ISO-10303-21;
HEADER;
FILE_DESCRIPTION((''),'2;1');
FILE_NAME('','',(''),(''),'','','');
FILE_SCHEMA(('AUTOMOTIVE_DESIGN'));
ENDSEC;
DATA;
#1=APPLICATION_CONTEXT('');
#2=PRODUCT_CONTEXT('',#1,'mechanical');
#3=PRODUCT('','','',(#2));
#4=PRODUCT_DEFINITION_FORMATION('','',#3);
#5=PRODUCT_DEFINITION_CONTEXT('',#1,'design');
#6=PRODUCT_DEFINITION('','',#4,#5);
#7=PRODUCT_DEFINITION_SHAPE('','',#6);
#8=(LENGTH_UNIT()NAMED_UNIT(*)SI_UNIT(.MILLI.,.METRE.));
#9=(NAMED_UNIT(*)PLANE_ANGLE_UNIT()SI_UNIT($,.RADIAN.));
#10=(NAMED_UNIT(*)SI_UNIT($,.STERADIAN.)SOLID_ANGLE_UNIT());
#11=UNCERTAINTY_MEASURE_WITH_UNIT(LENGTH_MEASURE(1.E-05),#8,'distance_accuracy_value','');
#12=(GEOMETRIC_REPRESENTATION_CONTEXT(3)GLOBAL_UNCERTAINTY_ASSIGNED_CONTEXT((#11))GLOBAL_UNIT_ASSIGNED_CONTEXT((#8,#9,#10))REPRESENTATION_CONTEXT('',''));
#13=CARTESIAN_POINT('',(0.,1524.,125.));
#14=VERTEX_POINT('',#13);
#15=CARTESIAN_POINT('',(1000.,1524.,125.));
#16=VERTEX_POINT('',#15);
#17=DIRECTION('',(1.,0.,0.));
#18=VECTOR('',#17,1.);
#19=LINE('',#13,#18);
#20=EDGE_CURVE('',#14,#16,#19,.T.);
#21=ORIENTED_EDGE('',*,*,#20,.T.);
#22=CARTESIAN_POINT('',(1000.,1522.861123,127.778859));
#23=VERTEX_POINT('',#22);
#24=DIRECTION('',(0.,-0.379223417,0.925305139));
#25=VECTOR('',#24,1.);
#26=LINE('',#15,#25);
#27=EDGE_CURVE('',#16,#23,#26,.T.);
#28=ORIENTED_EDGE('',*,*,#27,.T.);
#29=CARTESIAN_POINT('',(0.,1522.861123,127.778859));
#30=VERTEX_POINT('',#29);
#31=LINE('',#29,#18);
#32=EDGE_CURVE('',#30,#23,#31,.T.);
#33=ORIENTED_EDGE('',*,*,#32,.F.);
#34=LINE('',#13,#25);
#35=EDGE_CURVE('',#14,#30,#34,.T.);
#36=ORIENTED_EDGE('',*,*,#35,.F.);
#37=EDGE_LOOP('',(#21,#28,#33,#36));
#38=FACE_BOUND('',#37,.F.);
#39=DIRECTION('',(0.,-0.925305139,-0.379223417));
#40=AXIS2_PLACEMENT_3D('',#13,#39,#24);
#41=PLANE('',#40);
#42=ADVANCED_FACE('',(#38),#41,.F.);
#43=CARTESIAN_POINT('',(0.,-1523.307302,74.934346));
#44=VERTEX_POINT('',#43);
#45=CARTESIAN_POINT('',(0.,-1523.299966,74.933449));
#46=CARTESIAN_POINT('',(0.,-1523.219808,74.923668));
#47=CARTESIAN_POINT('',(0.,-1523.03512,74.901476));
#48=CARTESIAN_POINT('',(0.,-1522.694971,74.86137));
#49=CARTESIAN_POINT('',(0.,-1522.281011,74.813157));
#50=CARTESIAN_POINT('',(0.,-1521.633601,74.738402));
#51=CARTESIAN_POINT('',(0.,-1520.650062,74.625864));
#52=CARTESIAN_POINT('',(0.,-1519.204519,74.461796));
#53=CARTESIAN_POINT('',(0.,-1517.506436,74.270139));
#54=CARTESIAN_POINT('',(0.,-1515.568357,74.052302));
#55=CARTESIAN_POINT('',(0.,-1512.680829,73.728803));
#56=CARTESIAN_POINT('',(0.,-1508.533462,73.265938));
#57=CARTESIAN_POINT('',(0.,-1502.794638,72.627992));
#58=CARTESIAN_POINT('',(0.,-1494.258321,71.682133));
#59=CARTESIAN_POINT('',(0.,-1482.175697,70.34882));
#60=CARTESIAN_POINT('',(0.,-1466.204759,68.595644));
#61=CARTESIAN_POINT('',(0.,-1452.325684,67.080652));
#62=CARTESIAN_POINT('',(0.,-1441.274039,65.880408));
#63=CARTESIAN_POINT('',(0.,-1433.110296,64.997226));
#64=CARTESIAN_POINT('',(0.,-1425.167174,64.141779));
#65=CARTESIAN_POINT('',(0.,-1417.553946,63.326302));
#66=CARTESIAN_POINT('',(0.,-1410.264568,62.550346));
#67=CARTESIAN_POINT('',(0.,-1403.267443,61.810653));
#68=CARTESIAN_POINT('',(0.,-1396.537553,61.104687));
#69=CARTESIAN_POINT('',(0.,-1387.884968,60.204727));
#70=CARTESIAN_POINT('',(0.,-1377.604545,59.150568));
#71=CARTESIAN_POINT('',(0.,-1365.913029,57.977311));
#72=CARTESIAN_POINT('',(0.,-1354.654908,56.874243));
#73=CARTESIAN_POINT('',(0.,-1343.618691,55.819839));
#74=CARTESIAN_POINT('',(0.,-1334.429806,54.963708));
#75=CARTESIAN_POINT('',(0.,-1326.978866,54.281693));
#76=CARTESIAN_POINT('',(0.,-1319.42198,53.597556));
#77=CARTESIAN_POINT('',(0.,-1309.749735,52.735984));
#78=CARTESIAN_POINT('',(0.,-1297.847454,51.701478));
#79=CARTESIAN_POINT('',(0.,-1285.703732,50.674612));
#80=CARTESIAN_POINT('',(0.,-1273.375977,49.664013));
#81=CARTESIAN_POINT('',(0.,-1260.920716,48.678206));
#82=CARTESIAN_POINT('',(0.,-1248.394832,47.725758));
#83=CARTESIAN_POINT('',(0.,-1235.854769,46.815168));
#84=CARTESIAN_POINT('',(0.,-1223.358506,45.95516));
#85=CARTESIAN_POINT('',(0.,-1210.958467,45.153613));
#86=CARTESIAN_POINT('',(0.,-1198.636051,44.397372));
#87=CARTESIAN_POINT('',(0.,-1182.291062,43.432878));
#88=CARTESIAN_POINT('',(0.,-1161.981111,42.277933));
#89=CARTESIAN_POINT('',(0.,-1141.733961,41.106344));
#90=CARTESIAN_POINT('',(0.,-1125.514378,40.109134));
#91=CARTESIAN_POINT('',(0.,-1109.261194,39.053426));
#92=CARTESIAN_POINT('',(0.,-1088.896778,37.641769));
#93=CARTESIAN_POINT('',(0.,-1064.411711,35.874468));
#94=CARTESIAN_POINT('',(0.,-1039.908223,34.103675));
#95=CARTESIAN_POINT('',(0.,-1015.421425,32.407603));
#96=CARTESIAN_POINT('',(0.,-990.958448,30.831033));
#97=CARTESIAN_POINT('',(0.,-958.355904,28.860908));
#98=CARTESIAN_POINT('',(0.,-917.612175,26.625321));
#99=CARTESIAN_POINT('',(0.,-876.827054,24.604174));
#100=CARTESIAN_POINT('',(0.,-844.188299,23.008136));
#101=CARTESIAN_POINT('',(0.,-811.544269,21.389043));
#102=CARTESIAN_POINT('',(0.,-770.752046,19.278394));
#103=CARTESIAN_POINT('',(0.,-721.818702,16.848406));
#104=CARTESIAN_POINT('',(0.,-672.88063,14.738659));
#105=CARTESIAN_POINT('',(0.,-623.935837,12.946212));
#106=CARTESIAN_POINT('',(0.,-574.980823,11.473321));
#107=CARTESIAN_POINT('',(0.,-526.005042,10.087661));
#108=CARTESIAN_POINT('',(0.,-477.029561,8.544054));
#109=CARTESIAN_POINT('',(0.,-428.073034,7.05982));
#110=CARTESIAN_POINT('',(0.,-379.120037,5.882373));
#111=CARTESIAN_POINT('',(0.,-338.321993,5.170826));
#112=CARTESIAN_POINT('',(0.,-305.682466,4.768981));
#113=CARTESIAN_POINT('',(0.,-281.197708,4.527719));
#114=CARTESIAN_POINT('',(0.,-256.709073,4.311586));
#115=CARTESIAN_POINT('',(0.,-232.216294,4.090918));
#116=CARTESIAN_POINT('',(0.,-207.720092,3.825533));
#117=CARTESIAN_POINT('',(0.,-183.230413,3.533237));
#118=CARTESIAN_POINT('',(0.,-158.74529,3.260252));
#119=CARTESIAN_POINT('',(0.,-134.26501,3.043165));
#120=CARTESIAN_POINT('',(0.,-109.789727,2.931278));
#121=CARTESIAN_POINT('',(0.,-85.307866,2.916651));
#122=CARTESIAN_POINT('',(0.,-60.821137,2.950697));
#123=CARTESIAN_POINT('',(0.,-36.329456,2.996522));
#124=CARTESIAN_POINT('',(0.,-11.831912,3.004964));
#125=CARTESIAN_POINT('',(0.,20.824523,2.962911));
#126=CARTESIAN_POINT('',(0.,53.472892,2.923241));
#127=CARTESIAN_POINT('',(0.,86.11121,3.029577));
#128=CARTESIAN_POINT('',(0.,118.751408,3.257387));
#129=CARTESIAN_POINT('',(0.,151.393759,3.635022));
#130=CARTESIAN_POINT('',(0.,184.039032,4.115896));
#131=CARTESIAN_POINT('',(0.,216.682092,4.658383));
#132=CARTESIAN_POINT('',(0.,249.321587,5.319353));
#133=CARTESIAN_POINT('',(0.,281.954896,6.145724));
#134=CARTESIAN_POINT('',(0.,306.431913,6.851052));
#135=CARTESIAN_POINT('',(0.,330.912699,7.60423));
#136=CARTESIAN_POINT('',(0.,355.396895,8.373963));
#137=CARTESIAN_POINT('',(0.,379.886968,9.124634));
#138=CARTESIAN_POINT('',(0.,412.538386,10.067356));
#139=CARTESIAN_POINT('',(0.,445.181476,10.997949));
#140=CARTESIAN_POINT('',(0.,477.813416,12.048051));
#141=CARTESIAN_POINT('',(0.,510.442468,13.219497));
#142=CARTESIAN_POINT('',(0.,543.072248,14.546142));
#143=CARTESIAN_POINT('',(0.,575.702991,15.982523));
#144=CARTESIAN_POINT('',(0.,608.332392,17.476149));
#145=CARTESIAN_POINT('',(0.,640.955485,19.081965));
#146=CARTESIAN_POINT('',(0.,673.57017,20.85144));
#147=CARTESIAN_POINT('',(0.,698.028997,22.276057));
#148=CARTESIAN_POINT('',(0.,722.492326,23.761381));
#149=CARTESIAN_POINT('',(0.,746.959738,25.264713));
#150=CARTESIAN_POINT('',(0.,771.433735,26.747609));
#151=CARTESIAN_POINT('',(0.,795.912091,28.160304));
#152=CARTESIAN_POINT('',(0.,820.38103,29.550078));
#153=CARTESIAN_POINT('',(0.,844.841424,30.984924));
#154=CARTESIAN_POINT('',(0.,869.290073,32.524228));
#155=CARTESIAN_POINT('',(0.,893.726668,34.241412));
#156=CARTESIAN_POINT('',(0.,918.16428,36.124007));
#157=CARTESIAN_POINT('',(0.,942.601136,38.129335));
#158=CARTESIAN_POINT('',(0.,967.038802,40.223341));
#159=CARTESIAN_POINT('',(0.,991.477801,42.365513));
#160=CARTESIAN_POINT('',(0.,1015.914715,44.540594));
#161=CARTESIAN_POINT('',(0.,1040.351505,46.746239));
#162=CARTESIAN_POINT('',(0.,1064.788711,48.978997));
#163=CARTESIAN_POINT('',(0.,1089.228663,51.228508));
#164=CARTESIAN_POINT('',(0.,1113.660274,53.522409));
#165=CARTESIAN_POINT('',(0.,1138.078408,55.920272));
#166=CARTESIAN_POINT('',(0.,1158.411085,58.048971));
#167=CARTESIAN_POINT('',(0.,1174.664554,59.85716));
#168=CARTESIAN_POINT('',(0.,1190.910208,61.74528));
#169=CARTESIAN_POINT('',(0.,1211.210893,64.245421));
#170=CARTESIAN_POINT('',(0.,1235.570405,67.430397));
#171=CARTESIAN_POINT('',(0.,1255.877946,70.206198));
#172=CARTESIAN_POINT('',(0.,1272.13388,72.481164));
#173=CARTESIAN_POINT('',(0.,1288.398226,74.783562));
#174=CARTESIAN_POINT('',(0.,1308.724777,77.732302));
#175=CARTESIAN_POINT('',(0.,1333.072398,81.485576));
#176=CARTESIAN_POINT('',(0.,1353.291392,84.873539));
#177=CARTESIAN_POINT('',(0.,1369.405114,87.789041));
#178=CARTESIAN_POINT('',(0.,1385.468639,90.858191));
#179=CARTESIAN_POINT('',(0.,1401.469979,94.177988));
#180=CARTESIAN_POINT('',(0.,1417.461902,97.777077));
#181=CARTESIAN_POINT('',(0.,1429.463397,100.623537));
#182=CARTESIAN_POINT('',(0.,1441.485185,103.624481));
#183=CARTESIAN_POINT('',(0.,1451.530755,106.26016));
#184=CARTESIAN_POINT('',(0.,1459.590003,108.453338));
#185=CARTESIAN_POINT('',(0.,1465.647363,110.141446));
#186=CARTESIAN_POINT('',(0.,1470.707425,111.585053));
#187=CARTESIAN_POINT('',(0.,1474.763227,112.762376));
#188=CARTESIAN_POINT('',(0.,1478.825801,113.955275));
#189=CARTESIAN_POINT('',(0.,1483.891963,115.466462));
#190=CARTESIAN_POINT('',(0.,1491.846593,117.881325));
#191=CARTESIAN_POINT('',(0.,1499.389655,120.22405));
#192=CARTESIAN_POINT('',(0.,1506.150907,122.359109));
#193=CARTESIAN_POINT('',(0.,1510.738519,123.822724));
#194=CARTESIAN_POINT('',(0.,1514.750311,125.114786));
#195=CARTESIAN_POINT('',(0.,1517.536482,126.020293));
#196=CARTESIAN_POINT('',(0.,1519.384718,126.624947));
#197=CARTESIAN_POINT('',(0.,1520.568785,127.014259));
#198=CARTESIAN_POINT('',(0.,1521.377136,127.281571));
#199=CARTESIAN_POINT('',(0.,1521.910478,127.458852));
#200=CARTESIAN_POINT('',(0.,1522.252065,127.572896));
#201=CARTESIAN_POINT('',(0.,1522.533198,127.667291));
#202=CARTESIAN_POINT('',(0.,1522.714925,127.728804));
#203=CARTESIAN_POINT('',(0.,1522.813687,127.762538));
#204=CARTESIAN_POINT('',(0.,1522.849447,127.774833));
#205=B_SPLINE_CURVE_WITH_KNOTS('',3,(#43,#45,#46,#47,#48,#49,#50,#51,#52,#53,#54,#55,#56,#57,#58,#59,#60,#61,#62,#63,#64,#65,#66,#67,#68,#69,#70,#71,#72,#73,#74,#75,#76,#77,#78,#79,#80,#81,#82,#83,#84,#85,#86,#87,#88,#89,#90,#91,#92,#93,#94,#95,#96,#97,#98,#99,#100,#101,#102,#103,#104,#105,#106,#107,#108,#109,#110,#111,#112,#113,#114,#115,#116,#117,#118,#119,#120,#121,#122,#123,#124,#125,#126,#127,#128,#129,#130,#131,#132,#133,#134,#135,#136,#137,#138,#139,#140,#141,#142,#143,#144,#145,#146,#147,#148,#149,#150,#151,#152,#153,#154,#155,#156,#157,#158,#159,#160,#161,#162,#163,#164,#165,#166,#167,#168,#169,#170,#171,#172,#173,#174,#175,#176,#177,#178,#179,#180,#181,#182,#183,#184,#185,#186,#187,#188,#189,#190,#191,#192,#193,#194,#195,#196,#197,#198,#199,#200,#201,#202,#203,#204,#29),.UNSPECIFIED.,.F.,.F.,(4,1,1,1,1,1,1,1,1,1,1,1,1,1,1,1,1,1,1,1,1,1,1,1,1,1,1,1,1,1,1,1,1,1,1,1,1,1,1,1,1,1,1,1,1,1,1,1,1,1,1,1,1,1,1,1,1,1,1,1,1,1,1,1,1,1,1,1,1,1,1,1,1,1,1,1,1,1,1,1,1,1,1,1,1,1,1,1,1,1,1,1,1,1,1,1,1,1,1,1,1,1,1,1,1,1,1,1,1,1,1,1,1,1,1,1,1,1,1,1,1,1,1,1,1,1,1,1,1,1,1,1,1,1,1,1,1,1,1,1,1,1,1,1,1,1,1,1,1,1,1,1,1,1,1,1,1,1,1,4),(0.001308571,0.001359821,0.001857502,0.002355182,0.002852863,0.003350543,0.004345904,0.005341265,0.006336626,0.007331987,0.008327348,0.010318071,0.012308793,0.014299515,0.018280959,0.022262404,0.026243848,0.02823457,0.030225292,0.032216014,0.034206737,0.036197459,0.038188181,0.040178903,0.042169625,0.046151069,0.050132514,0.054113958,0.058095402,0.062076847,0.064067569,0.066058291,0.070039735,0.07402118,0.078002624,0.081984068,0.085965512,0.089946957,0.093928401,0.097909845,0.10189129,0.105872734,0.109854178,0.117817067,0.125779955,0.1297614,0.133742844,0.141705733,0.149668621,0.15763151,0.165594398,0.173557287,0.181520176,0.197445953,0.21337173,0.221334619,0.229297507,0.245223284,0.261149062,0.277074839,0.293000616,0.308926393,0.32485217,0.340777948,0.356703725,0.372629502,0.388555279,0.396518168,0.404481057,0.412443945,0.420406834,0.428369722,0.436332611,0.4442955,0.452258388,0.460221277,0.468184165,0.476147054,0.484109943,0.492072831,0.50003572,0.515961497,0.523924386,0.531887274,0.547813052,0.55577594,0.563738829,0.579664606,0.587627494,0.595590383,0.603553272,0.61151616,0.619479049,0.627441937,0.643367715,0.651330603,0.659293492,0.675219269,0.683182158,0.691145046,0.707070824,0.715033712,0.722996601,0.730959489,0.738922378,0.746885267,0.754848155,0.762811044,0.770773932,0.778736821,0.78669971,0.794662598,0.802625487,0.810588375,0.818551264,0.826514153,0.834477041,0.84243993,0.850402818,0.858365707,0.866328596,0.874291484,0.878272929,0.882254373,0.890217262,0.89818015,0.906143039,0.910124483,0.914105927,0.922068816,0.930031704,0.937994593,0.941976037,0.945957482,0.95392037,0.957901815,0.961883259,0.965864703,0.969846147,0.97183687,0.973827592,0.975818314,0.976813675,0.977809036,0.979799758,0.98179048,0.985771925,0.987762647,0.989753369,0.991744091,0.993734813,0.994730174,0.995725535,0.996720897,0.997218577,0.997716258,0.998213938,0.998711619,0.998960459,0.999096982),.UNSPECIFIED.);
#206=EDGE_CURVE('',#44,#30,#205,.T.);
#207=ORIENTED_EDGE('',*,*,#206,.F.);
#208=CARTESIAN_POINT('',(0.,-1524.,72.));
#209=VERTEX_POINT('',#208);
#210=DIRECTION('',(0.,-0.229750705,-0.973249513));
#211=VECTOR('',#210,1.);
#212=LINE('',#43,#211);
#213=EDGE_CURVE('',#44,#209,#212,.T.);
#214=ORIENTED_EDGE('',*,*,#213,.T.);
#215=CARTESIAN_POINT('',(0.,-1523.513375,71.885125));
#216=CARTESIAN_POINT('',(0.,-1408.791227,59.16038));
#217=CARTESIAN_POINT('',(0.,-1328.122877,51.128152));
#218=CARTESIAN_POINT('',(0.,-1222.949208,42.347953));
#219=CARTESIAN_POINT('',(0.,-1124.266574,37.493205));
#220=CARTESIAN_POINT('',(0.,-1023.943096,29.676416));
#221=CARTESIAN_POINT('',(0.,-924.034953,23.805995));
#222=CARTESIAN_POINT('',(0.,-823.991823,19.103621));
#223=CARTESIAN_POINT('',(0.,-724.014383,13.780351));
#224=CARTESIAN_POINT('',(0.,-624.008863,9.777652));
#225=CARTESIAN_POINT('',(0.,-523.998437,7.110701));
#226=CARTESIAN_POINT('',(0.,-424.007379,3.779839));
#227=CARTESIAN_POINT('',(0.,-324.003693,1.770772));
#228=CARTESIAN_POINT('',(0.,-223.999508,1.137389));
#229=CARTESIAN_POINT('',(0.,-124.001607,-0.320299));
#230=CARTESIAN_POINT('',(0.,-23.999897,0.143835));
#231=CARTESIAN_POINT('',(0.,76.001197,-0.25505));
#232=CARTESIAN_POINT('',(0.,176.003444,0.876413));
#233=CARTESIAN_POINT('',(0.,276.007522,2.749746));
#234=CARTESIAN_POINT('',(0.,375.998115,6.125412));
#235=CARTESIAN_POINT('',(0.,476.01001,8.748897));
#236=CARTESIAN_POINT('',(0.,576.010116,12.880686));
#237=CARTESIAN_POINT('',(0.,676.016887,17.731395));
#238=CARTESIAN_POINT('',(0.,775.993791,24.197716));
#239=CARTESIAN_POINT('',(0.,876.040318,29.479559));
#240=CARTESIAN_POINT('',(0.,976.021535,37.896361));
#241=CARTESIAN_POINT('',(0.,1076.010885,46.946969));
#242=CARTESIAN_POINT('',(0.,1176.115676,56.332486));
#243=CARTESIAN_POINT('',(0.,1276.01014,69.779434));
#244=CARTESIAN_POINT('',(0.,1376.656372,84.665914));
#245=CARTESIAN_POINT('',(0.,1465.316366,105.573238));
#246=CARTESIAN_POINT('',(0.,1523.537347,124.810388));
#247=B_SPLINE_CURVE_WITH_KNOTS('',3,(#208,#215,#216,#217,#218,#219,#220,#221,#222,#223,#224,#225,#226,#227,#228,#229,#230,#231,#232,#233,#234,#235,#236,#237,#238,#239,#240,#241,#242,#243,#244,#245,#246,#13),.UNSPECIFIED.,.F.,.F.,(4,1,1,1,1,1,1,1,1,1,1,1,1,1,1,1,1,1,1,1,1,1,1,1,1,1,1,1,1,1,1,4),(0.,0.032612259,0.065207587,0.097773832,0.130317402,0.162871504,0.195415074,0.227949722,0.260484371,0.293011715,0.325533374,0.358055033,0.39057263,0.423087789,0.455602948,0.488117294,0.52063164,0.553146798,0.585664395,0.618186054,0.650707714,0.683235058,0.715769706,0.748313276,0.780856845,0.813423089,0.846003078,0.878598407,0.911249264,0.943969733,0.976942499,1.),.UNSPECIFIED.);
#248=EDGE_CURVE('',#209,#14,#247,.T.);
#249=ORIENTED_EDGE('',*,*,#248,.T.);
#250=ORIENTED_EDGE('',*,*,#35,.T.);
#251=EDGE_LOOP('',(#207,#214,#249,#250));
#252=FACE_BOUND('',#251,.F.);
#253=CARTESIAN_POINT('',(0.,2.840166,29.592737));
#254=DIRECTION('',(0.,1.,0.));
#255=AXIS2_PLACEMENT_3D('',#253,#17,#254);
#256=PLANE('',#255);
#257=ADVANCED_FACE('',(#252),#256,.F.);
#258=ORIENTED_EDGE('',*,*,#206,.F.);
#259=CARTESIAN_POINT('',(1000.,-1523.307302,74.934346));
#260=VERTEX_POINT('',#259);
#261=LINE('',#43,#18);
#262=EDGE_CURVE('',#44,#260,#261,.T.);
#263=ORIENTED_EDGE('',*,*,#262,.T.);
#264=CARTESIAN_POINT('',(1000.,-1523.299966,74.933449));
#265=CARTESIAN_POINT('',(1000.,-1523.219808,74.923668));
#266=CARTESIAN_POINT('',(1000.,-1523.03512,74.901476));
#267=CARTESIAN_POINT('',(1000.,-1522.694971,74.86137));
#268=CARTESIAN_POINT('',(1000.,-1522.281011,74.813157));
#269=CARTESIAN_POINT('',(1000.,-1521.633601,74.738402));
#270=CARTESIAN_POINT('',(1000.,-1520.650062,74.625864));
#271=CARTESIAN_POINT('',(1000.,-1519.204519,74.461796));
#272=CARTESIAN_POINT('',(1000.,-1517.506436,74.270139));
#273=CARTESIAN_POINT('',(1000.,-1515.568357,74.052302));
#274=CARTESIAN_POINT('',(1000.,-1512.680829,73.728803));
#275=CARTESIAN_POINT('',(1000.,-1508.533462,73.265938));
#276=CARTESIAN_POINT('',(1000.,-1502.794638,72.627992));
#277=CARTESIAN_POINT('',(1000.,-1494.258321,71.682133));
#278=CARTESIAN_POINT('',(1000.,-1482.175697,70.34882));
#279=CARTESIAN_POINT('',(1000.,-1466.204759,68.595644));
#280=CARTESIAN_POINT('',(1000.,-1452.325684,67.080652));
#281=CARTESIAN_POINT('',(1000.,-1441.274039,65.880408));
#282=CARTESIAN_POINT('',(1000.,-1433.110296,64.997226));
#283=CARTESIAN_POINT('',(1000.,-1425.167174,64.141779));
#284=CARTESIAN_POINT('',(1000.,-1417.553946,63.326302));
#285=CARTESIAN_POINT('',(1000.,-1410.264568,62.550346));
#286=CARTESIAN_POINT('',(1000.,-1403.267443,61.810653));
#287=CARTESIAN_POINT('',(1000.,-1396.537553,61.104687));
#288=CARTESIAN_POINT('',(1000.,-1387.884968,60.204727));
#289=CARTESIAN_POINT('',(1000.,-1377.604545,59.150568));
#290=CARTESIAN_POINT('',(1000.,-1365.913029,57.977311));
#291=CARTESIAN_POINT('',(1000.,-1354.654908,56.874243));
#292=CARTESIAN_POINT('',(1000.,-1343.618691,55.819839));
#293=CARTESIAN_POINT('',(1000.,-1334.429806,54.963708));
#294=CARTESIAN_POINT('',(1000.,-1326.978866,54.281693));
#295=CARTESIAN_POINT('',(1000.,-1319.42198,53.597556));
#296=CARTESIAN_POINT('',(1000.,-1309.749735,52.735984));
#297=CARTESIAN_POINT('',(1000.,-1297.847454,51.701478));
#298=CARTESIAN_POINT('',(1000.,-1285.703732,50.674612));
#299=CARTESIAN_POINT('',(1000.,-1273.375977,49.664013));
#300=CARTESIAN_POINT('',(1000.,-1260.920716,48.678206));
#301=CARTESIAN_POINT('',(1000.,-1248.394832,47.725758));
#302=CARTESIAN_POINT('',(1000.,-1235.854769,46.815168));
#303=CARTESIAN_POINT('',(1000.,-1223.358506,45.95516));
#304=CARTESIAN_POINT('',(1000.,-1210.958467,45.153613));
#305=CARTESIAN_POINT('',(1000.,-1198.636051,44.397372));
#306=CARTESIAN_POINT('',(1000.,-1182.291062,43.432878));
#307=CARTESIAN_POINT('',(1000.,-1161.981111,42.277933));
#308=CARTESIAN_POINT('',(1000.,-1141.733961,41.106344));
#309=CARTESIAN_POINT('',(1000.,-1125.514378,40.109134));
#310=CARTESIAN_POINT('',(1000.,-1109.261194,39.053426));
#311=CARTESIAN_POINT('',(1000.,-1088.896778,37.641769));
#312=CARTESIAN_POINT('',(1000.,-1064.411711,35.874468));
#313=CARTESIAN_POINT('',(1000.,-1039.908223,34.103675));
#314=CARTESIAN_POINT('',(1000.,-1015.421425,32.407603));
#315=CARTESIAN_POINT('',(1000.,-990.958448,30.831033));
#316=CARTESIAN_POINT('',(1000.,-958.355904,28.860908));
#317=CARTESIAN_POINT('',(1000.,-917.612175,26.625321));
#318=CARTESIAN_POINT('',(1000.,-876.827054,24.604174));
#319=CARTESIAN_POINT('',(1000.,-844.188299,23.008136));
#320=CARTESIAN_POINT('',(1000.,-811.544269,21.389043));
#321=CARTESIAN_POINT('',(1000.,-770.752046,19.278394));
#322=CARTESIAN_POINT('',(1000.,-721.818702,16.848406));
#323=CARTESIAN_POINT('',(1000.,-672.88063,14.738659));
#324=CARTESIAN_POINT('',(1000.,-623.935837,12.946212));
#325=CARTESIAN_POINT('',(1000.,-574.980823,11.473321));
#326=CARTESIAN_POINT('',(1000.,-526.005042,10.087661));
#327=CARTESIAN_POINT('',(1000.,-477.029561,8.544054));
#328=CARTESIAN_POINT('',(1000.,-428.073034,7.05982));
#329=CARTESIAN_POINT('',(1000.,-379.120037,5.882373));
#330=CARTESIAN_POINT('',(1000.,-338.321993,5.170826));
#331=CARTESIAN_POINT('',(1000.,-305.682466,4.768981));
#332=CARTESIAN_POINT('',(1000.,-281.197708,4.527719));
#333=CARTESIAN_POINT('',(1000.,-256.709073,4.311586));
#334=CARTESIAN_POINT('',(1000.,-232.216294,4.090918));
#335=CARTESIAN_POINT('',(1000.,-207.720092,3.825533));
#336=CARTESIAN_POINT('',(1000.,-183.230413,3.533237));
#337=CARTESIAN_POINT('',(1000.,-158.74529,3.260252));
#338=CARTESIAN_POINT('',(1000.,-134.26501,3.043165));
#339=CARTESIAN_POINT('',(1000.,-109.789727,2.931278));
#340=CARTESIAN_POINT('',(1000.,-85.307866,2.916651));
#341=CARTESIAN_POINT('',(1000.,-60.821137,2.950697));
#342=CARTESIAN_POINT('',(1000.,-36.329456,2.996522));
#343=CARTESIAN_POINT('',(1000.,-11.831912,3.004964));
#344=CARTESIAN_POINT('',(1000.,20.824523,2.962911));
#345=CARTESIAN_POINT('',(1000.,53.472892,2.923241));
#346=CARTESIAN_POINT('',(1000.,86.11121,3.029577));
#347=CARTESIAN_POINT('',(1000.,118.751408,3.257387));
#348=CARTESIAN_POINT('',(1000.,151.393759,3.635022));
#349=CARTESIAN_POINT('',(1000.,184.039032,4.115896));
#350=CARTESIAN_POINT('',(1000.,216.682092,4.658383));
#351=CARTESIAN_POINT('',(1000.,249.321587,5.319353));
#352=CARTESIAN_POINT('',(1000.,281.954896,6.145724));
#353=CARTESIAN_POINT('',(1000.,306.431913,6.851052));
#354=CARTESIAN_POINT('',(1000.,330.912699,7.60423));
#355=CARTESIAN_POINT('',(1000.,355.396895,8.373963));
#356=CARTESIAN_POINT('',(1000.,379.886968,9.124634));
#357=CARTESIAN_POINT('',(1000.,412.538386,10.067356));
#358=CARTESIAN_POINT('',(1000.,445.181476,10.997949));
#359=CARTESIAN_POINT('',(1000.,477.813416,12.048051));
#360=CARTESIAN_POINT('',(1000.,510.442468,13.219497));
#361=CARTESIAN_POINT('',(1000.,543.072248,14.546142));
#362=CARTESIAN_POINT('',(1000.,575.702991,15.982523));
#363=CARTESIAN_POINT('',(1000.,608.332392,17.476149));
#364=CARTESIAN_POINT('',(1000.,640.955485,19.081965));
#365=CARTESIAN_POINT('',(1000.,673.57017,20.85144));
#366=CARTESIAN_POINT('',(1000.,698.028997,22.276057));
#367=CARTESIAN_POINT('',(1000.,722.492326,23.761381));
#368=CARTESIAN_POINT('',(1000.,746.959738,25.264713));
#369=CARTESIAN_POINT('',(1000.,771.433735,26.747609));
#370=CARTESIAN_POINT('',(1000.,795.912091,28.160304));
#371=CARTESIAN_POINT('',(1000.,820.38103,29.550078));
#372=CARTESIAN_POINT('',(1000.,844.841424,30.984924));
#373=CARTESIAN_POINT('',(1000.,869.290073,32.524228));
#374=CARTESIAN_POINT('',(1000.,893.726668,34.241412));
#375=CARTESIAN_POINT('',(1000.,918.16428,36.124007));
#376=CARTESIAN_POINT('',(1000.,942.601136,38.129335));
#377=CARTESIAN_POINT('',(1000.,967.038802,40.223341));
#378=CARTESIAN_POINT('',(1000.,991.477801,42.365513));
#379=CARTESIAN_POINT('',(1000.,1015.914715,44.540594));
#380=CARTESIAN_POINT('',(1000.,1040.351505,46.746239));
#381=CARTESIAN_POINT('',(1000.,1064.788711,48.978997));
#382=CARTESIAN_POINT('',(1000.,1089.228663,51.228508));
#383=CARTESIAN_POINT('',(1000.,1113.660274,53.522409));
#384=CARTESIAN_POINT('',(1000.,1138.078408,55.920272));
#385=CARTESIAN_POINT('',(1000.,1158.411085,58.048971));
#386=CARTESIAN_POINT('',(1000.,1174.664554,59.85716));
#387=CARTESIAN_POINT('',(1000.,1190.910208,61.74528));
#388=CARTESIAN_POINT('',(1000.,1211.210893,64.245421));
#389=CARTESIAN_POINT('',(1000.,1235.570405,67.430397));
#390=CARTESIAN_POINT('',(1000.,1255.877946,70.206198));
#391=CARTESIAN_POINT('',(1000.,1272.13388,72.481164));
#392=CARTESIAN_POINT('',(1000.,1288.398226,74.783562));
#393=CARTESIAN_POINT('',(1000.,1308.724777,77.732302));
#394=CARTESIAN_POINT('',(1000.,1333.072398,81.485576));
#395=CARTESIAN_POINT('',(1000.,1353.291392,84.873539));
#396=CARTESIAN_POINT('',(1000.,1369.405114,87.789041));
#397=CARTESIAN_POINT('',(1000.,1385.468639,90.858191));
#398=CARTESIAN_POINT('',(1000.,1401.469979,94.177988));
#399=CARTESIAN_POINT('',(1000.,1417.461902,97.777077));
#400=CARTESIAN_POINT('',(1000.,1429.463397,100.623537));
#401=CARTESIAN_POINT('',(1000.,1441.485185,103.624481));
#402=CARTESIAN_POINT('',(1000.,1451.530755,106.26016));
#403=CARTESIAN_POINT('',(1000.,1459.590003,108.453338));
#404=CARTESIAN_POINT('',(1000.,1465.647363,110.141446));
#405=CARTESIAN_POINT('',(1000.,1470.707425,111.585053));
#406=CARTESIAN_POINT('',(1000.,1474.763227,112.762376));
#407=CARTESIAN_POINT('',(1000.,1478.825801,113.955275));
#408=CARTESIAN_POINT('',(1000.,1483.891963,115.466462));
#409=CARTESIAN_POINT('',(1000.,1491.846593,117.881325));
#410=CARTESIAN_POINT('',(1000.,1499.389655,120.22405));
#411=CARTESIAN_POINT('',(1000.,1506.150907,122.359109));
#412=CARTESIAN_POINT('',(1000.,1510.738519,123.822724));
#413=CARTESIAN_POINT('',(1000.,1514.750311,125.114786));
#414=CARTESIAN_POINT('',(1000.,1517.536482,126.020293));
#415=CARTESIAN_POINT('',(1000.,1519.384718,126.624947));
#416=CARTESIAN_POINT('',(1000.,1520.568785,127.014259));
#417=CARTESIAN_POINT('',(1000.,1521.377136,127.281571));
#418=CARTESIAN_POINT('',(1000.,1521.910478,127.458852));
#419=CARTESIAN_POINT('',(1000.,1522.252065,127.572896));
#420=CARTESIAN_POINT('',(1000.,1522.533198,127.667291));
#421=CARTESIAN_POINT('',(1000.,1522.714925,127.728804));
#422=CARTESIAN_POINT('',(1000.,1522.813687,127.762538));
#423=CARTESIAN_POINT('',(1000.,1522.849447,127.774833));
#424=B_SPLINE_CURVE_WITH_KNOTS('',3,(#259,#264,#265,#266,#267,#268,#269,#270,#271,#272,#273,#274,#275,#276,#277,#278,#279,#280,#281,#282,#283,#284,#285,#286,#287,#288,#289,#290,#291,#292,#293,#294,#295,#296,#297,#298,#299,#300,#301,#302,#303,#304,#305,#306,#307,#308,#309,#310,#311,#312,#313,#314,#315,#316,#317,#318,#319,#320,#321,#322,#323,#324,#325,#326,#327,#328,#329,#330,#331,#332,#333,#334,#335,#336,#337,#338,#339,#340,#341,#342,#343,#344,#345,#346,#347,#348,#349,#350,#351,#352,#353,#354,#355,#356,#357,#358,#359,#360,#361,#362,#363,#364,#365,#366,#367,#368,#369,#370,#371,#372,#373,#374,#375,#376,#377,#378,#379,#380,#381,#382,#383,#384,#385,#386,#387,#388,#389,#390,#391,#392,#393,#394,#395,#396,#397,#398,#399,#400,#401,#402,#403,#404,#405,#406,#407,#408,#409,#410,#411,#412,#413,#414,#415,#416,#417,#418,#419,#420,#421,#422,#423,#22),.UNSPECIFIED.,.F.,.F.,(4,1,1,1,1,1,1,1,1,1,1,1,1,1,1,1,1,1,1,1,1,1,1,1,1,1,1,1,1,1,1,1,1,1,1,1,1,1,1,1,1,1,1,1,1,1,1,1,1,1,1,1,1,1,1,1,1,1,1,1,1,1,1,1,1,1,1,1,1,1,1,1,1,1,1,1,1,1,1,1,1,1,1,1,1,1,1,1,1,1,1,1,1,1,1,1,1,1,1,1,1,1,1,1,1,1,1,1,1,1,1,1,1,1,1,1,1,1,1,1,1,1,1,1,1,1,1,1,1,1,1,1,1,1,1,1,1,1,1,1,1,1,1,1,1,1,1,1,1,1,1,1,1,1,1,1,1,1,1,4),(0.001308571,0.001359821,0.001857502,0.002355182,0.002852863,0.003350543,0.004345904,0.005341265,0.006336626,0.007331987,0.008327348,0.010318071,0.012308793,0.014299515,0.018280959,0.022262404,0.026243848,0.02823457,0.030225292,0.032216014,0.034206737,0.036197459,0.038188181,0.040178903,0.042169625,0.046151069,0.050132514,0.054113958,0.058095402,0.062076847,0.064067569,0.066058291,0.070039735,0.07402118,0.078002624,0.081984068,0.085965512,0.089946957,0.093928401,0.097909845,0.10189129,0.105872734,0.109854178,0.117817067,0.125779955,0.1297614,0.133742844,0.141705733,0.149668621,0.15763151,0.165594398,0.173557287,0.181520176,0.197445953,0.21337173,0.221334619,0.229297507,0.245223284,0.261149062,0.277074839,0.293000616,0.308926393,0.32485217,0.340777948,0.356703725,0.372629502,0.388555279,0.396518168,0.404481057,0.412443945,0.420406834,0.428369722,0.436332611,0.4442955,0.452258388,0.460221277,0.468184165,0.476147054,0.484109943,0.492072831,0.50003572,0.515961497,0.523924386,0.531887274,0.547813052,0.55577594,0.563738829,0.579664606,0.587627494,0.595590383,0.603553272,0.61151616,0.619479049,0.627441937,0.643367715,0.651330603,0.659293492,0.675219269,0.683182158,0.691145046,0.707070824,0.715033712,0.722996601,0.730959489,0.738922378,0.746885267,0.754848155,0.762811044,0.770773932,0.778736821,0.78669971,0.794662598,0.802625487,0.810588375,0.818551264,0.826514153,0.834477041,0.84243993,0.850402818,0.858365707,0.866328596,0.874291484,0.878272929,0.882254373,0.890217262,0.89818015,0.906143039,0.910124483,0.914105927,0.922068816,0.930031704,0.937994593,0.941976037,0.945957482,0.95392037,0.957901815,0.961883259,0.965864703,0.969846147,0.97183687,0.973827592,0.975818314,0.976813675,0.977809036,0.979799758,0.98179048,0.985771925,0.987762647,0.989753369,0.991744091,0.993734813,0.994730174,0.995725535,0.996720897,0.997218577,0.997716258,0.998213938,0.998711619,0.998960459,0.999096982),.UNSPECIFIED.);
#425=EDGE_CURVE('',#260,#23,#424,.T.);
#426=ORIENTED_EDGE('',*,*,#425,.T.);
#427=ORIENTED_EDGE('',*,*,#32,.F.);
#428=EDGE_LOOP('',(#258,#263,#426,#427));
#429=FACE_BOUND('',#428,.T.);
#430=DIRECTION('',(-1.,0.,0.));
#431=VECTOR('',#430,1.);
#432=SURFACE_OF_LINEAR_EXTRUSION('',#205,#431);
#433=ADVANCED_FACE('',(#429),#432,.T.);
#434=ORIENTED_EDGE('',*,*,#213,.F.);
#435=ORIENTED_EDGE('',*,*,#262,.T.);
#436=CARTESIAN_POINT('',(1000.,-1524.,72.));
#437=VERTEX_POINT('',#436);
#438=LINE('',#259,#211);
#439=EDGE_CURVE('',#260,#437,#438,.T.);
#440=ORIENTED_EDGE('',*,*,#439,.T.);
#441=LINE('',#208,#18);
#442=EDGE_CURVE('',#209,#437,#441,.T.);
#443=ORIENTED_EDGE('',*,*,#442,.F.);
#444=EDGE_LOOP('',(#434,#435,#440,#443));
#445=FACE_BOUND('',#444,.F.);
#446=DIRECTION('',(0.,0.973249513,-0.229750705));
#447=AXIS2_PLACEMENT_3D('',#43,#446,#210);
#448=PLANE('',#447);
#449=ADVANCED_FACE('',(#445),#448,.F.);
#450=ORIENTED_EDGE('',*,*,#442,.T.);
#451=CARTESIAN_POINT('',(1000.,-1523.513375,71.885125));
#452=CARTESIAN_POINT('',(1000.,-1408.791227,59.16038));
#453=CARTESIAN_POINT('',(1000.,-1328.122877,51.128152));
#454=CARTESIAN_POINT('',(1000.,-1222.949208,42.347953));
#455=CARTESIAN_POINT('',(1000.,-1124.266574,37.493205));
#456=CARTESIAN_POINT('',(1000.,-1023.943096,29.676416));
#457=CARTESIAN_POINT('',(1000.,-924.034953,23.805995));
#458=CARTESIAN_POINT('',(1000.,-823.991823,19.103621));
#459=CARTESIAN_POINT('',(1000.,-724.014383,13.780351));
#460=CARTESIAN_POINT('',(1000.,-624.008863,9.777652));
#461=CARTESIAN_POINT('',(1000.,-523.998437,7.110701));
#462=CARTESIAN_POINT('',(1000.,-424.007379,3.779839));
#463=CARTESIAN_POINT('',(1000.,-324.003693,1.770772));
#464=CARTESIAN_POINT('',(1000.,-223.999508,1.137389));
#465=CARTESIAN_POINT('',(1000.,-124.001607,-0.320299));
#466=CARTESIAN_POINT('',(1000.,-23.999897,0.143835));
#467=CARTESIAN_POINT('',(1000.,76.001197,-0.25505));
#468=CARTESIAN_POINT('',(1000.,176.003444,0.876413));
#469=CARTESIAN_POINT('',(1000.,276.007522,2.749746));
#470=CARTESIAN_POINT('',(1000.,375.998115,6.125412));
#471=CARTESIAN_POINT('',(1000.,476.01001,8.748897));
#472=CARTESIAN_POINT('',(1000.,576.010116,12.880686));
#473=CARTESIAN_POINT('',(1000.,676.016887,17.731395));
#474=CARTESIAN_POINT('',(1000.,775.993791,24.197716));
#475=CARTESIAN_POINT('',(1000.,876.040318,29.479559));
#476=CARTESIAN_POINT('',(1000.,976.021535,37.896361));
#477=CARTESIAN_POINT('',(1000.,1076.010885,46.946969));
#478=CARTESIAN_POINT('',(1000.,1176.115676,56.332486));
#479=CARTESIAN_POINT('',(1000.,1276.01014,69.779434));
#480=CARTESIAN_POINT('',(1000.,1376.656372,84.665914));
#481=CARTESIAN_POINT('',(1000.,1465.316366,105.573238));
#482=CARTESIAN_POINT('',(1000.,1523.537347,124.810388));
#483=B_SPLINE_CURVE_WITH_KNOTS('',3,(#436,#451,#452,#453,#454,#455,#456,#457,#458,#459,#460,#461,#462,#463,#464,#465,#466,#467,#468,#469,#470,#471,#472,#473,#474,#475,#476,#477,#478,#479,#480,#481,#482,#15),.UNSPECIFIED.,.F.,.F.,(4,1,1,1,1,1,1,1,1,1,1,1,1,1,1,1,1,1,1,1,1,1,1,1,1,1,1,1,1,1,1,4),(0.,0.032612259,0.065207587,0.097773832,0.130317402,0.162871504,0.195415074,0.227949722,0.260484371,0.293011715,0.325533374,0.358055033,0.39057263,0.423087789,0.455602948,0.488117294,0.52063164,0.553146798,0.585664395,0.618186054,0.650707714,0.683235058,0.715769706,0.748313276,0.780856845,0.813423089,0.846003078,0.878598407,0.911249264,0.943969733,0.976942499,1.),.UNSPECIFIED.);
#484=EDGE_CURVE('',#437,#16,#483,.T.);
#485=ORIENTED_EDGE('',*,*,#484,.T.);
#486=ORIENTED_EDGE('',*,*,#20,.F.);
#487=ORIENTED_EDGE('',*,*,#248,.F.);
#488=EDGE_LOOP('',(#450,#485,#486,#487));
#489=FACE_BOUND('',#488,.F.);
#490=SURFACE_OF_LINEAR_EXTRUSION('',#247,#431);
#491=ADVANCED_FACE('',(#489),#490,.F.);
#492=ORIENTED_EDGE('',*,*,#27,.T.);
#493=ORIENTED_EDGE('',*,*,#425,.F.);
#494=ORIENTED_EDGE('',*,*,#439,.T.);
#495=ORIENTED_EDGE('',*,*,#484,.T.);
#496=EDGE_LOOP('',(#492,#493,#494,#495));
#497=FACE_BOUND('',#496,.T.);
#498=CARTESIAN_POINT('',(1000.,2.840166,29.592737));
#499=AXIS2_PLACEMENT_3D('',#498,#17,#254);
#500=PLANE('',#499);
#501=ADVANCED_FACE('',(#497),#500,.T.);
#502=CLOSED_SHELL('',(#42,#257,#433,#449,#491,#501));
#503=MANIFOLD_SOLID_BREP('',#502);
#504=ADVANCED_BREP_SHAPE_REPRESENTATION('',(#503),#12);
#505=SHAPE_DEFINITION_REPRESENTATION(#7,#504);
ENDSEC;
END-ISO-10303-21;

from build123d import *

# Parameters (mm, degrees)
F1_DEPTH = 1000


# Not quite as in the source:
# - the dataset's text gives a spline's control points without its knots; the knots are read off the source's solid


with BuildPart() as f1:
    # F0 (on Right) → F1 (new body)
    with BuildSketch(Plane.YZ):
        with BuildLine():
            Line((-1523.3073018893, 74.9343461632), (-1524, 72))
            add(Edge.make_bspline(
                [(-1524, 72), (-1523.5133752437, 71.8851246477), (-1408.7912269509, 59.1603797095), (-1328.1228770954, 51.1281516651), (-1222.9492078542, 42.3479525491), (-1124.2665744342, 37.4932045799), (-1023.94309645, 29.6764155139), (-924.0349531775, 23.805994689), (-823.9918225167, 19.1036206425), (-724.0143825979, 13.7803509145), (-624.0088625202, 9.7776519647), (-523.9984371896, 7.1107007848), (-424.0073790506, 3.7798389716), (-324.0036932597, 1.7707717723), (-223.9995081657, 1.1373887456), (-124.0016068592, -0.3202987771), (-23.9998974277, 0.1438353394), (76.0011965648, -0.2550497721), (176.0034437181, 0.8764133936), (276.0075220578, 2.7497464803), (375.9981147016, 6.1254124825), (476.0100095315, 8.748896998), (576.0101158316, 12.8806862016), (676.01688664, 17.7313952533), (775.9937905409, 24.1977156997), (876.0403182227, 29.4795593065), (976.0215348454, 37.8963611687), (1076.0108845518, 46.9469689387), (1176.1156760629, 56.3324859418), (1276.010139981, 69.7794335028), (1376.656372399, 84.6659141086), (1465.3163658887, 105.5732382543), (1523.5373474307, 124.8103882913), (1524, 125)],
                knots=[0, 0, 0, 0, 0.0326122587, 0.0652075875, 0.097773832, 0.1303174015, 0.1628715045, 0.195415074, 0.2279497224, 0.2604843708, 0.2930117147, 0.3255333739, 0.3580550332, 0.3905726301, 0.4230877889, 0.4556029477, 0.4881172936, 0.5206316396, 0.5531467984, 0.5856643953, 0.6181860545, 0.6507077138, 0.6832350577, 0.7157697061, 0.7483132755, 0.780856845, 0.8134230895, 0.846003078, 0.8785984068, 0.9112492637, 0.9439697331, 0.9769424993, 1, 1, 1, 1], degree=3))
            Line((1524, 125), (1522.8611233363, 127.7788590595))
            add(Edge.make_bspline(
                [(-1523.3073018888, 74.9343461725), (-1523.299966013, 74.9334494555), (-1523.2198083262, 74.9236681323), (-1523.0351200087, 74.9014757296), (-1522.6949712277, 74.8613702834), (-1522.281011374, 74.813156599), (-1521.6336009067, 74.7384018158), (-1520.6500623089, 74.6258641857), (-1519.2045189445, 74.4617964753), (-1517.5064355015, 74.2701394867), (-1515.5683567762, 74.0523015901), (-1512.680829434, 73.7288028034), (-1508.5334622756, 73.2659376191), (-1502.7946376568, 72.6279918709), (-1494.2583209074, 71.682132641), (-1482.1756974645, 70.3488200369), (-1466.2047587167, 68.5956437129), (-1452.3256836261, 67.0806516811), (-1441.2740386393, 65.880408023), (-1433.110295965, 64.9972258273), (-1425.1671741123, 64.1417787294), (-1417.5539457503, 63.3263016521), (-1410.2645680047, 62.550346295), (-1403.2674425262, 61.8106531305), (-1396.537552623, 61.1046865763), (-1387.8849679605, 60.2047266193), (-1377.6045448121, 59.1505684), (-1365.9130286935, 57.9773109209), (-1354.6549083103, 56.8742434495), (-1343.6186911004, 55.8198394852), (-1334.4298058641, 54.9637077803), (-1326.9788664776, 54.2816929058), (-1319.4219800533, 53.5975555479), (-1309.7497353302, 52.7359840788), (-1297.8474540558, 51.7014775596), (-1285.7037319278, 50.6746117593), (-1273.3759770786, 49.6640131639), (-1260.9207157003, 48.6782064212), (-1248.3948317049, 47.7257583557), (-1235.8547686388, 46.8151675408), (-1223.3585059103, 45.9551603228), (-1210.958467136, 45.1536129726), (-1198.6360512018, 44.3973720368), (-1182.2910618753, 43.4328778427), (-1161.9811113189, 42.2779329609), (-1141.733960569, 41.1063438127), (-1125.514377756, 40.1091337443), (-1109.2611940969, 39.0534264768), (-1088.8967781433, 37.6417694976), (-1064.4117108032, 35.8744683374), (-1039.9082234454, 34.1036747602), (-1015.4214251664, 32.4076032925), (-990.958447719, 30.8310333233), (-958.3559041302, 28.8609077144), (-917.6121754818, 26.6253211678), (-876.8270537221, 24.6041738352), (-844.188299385, 23.0081359533), (-811.54426929, 21.3890427801), (-770.7520458388, 19.2783937286), (-721.8187015492, 16.848406052), (-672.8806295114, 14.7386593589), (-623.9358370332, 12.9462115971), (-574.9808229355, 11.4733209265), (-526.005041876, 10.0876614049), (-477.0295609147, 8.5440536124), (-428.0730344258, 7.0598197918), (-379.1200369386, 5.8823730897), (-338.321993088, 5.170826056), (-305.6824661006, 4.7689805871), (-281.1977082019, 4.5277185043), (-256.7090728957, 4.3115855209), (-232.2162939694, 4.090917505), (-207.720091849, 3.8255327577), (-183.2304126015, 3.5332370927), (-158.7452897195, 3.2602517037), (-134.2650097936, 3.0431645046), (-109.789727149, 2.9312776117), (-85.3078661826, 2.9166511186), (-60.8211370084, 2.9506965411), (-36.3294557589, 2.9965217861), (-11.8319116788, 3.0049639707), (20.8245232819, 2.9629113558), (53.4728917987, 2.9232405587), (86.1112098449, 3.0295774046), (118.7514076717, 3.2573873147), (151.3937591024, 3.6350222195), (184.0390320755, 4.1158963002), (216.6820920486, 4.6583832374), (249.3215868938, 5.3193530019), (281.9548960454, 6.1457238508), (306.4319130454, 6.8510522932), (330.912698975, 7.6042301044), (355.3968946507, 8.3739629036), (379.8869681746, 9.1246335871), (412.5383858368, 10.0673562858), (445.1814763671, 10.9979485556), (477.8134164694, 12.0480507811), (510.4424680253, 13.219496519), (543.0722476693, 14.546141989), (575.7029912522, 15.9825228687), (608.3323919445, 17.476149314), (640.9554853129, 19.0819651007), (673.5701704718, 20.8514395746), (698.0289966565, 22.2760567825), (722.4923256935, 23.7613806024), (746.959737701, 25.2647132772), (771.4337349653, 26.7476087341), (795.9120908224, 28.1603042561), (820.3810299488, 29.5500781189), (844.8414236935, 30.9849244209), (869.2900729699, 32.5242275408), (893.7266679632, 34.2414118441), (918.1642800725, 36.1240069203), (942.6011356283, 38.1293353831), (967.0388018344, 40.2233411953), (991.4778005947, 42.3655125472), (1015.9147151689, 44.5405937528), (1040.3515045877, 46.746238925), (1064.7887107091, 48.9789966315), (1089.228663198, 51.2285077169), (1113.6602743849, 53.5224089098), (1138.0784076469, 55.920271631), (1158.4110852375, 58.048971006), (1174.6645543039, 59.857159664), (1190.9102081788, 61.7452795294), (1211.2108926353, 64.2454213124), (1235.570404771, 67.4303974807), (1255.8779464019, 70.2061975732), (1272.1338804738, 72.4811643118), (1288.3982257573, 74.7835615356), (1308.7247768932, 77.7323016393), (1333.0723979903, 81.485575974), (1353.2913924311, 84.8735386822), (1369.4051137127, 87.7890406266), (1385.4686390166, 90.8581906426), (1401.4699791607, 94.1779880698), (1417.461902047, 97.7770766137), (1429.4633970103, 100.6235368057), (1441.485185036, 103.6244809482), (1451.5307548628, 106.2601599676), (1459.590003099, 108.4533381993), (1465.6473631861, 110.1414458804), (1470.707424904, 111.585053419), (1474.7632266714, 112.7623756546), (1478.8258008787, 113.9552751797), (1483.891963184, 115.4664616), (1491.8465926311, 117.8813247966), (1499.3896545379, 120.2240497146), (1506.1509067278, 122.359109234), (1510.7385187374, 123.8227237097), (1514.7503113394, 125.1147858794), (1517.5364822246, 126.0202934524), (1519.3847183518, 126.6249470601), (1520.5687849618, 127.014259456), (1521.3771361125, 127.2815712044), (1521.9104782112, 127.4588524771), (1522.2520650523, 127.5728961012), (1522.5331982652, 127.6672909291), (1522.7149253271, 127.7288044967), (1522.8136870439, 127.762538229), (1522.8494466826, 127.7748332421), (1522.8611233501, 127.7788590193)],
                knots=[0.0013085711, 0.0013085711, 0.0013085711, 0.0013085711, 0.001359821, 0.0018575015, 0.0023551821, 0.0028528626, 0.0033505431, 0.0043459042, 0.0053412653, 0.0063366264, 0.0073319874, 0.0083273485, 0.0103180707, 0.0123087928, 0.014299515, 0.0182809593, 0.0222624036, 0.0262438479, 0.02823457, 0.0302252922, 0.0322160143, 0.0342067365, 0.0361974586, 0.0381881808, 0.0401789029, 0.0421696251, 0.0461510694, 0.0501325137, 0.054113958, 0.0580954023, 0.0620768466, 0.0640675687, 0.0660582909, 0.0700397352, 0.0740211795, 0.0780026238, 0.0819840681, 0.0859655124, 0.0899469567, 0.093928401, 0.0979098453, 0.1018912896, 0.1058727339, 0.1098541782, 0.1178170668, 0.1257799554, 0.1297613997, 0.133742844, 0.1417057326, 0.1496686212, 0.1576315098, 0.1655943984, 0.1735572871, 0.1815201757, 0.1974459529, 0.2133717301, 0.2213346187, 0.2292975073, 0.2452232845, 0.2611490617, 0.2770748389, 0.2930006161, 0.3089263933, 0.3248521705, 0.3407779477, 0.356703725, 0.3726295022, 0.3885552794, 0.396518168, 0.4044810566, 0.4124439452, 0.4204068338, 0.4283697224, 0.436332611, 0.4442954996, 0.4522583882, 0.4602212768, 0.4681841654, 0.476147054, 0.4841099426, 0.4920728312, 0.5000357198, 0.5159614971, 0.5239243857, 0.5318872743, 0.5478130515, 0.5557759401, 0.5637388287, 0.5796646059, 0.5876274945, 0.5955903831, 0.6035532717, 0.6115161603, 0.6194790489, 0.6274419375, 0.6433677147, 0.6513306033, 0.6592934919, 0.6752192691, 0.6831821577, 0.6911450464, 0.7070708236, 0.7150337122, 0.7229966008, 0.7309594894, 0.738922378, 0.7468852666, 0.7548481552, 0.7628110438, 0.7707739324, 0.778736821, 0.7866997096, 0.7946625982, 0.8026254868, 0.8105883754, 0.818551264, 0.8265141526, 0.8344770412, 0.8424399298, 0.8504028184, 0.858365707, 0.8663285957, 0.8742914843, 0.8782729286, 0.8822543729, 0.8902172615, 0.8981801501, 0.9061430387, 0.910124483, 0.9141059273, 0.9220688159, 0.9300317045, 0.9379945931, 0.9419760374, 0.9459574817, 0.9539203703, 0.9579018146, 0.9618832589, 0.9658647032, 0.9698461475, 0.9718368697, 0.9738275918, 0.975818314, 0.976813675, 0.9778090361, 0.9797997583, 0.9817904804, 0.9857719247, 0.9877626469, 0.989753369, 0.9917440912, 0.9937348133, 0.9947301744, 0.9957255355, 0.9967208966, 0.9972185771, 0.9977162576, 0.9982139382, 0.9987116187, 0.998960459, 0.9990969818, 0.9990969818, 0.9990969818, 0.9990969818], degree=3))
        make_face()
    extrude(amount=F1_DEPTH)


solid = f1.part
